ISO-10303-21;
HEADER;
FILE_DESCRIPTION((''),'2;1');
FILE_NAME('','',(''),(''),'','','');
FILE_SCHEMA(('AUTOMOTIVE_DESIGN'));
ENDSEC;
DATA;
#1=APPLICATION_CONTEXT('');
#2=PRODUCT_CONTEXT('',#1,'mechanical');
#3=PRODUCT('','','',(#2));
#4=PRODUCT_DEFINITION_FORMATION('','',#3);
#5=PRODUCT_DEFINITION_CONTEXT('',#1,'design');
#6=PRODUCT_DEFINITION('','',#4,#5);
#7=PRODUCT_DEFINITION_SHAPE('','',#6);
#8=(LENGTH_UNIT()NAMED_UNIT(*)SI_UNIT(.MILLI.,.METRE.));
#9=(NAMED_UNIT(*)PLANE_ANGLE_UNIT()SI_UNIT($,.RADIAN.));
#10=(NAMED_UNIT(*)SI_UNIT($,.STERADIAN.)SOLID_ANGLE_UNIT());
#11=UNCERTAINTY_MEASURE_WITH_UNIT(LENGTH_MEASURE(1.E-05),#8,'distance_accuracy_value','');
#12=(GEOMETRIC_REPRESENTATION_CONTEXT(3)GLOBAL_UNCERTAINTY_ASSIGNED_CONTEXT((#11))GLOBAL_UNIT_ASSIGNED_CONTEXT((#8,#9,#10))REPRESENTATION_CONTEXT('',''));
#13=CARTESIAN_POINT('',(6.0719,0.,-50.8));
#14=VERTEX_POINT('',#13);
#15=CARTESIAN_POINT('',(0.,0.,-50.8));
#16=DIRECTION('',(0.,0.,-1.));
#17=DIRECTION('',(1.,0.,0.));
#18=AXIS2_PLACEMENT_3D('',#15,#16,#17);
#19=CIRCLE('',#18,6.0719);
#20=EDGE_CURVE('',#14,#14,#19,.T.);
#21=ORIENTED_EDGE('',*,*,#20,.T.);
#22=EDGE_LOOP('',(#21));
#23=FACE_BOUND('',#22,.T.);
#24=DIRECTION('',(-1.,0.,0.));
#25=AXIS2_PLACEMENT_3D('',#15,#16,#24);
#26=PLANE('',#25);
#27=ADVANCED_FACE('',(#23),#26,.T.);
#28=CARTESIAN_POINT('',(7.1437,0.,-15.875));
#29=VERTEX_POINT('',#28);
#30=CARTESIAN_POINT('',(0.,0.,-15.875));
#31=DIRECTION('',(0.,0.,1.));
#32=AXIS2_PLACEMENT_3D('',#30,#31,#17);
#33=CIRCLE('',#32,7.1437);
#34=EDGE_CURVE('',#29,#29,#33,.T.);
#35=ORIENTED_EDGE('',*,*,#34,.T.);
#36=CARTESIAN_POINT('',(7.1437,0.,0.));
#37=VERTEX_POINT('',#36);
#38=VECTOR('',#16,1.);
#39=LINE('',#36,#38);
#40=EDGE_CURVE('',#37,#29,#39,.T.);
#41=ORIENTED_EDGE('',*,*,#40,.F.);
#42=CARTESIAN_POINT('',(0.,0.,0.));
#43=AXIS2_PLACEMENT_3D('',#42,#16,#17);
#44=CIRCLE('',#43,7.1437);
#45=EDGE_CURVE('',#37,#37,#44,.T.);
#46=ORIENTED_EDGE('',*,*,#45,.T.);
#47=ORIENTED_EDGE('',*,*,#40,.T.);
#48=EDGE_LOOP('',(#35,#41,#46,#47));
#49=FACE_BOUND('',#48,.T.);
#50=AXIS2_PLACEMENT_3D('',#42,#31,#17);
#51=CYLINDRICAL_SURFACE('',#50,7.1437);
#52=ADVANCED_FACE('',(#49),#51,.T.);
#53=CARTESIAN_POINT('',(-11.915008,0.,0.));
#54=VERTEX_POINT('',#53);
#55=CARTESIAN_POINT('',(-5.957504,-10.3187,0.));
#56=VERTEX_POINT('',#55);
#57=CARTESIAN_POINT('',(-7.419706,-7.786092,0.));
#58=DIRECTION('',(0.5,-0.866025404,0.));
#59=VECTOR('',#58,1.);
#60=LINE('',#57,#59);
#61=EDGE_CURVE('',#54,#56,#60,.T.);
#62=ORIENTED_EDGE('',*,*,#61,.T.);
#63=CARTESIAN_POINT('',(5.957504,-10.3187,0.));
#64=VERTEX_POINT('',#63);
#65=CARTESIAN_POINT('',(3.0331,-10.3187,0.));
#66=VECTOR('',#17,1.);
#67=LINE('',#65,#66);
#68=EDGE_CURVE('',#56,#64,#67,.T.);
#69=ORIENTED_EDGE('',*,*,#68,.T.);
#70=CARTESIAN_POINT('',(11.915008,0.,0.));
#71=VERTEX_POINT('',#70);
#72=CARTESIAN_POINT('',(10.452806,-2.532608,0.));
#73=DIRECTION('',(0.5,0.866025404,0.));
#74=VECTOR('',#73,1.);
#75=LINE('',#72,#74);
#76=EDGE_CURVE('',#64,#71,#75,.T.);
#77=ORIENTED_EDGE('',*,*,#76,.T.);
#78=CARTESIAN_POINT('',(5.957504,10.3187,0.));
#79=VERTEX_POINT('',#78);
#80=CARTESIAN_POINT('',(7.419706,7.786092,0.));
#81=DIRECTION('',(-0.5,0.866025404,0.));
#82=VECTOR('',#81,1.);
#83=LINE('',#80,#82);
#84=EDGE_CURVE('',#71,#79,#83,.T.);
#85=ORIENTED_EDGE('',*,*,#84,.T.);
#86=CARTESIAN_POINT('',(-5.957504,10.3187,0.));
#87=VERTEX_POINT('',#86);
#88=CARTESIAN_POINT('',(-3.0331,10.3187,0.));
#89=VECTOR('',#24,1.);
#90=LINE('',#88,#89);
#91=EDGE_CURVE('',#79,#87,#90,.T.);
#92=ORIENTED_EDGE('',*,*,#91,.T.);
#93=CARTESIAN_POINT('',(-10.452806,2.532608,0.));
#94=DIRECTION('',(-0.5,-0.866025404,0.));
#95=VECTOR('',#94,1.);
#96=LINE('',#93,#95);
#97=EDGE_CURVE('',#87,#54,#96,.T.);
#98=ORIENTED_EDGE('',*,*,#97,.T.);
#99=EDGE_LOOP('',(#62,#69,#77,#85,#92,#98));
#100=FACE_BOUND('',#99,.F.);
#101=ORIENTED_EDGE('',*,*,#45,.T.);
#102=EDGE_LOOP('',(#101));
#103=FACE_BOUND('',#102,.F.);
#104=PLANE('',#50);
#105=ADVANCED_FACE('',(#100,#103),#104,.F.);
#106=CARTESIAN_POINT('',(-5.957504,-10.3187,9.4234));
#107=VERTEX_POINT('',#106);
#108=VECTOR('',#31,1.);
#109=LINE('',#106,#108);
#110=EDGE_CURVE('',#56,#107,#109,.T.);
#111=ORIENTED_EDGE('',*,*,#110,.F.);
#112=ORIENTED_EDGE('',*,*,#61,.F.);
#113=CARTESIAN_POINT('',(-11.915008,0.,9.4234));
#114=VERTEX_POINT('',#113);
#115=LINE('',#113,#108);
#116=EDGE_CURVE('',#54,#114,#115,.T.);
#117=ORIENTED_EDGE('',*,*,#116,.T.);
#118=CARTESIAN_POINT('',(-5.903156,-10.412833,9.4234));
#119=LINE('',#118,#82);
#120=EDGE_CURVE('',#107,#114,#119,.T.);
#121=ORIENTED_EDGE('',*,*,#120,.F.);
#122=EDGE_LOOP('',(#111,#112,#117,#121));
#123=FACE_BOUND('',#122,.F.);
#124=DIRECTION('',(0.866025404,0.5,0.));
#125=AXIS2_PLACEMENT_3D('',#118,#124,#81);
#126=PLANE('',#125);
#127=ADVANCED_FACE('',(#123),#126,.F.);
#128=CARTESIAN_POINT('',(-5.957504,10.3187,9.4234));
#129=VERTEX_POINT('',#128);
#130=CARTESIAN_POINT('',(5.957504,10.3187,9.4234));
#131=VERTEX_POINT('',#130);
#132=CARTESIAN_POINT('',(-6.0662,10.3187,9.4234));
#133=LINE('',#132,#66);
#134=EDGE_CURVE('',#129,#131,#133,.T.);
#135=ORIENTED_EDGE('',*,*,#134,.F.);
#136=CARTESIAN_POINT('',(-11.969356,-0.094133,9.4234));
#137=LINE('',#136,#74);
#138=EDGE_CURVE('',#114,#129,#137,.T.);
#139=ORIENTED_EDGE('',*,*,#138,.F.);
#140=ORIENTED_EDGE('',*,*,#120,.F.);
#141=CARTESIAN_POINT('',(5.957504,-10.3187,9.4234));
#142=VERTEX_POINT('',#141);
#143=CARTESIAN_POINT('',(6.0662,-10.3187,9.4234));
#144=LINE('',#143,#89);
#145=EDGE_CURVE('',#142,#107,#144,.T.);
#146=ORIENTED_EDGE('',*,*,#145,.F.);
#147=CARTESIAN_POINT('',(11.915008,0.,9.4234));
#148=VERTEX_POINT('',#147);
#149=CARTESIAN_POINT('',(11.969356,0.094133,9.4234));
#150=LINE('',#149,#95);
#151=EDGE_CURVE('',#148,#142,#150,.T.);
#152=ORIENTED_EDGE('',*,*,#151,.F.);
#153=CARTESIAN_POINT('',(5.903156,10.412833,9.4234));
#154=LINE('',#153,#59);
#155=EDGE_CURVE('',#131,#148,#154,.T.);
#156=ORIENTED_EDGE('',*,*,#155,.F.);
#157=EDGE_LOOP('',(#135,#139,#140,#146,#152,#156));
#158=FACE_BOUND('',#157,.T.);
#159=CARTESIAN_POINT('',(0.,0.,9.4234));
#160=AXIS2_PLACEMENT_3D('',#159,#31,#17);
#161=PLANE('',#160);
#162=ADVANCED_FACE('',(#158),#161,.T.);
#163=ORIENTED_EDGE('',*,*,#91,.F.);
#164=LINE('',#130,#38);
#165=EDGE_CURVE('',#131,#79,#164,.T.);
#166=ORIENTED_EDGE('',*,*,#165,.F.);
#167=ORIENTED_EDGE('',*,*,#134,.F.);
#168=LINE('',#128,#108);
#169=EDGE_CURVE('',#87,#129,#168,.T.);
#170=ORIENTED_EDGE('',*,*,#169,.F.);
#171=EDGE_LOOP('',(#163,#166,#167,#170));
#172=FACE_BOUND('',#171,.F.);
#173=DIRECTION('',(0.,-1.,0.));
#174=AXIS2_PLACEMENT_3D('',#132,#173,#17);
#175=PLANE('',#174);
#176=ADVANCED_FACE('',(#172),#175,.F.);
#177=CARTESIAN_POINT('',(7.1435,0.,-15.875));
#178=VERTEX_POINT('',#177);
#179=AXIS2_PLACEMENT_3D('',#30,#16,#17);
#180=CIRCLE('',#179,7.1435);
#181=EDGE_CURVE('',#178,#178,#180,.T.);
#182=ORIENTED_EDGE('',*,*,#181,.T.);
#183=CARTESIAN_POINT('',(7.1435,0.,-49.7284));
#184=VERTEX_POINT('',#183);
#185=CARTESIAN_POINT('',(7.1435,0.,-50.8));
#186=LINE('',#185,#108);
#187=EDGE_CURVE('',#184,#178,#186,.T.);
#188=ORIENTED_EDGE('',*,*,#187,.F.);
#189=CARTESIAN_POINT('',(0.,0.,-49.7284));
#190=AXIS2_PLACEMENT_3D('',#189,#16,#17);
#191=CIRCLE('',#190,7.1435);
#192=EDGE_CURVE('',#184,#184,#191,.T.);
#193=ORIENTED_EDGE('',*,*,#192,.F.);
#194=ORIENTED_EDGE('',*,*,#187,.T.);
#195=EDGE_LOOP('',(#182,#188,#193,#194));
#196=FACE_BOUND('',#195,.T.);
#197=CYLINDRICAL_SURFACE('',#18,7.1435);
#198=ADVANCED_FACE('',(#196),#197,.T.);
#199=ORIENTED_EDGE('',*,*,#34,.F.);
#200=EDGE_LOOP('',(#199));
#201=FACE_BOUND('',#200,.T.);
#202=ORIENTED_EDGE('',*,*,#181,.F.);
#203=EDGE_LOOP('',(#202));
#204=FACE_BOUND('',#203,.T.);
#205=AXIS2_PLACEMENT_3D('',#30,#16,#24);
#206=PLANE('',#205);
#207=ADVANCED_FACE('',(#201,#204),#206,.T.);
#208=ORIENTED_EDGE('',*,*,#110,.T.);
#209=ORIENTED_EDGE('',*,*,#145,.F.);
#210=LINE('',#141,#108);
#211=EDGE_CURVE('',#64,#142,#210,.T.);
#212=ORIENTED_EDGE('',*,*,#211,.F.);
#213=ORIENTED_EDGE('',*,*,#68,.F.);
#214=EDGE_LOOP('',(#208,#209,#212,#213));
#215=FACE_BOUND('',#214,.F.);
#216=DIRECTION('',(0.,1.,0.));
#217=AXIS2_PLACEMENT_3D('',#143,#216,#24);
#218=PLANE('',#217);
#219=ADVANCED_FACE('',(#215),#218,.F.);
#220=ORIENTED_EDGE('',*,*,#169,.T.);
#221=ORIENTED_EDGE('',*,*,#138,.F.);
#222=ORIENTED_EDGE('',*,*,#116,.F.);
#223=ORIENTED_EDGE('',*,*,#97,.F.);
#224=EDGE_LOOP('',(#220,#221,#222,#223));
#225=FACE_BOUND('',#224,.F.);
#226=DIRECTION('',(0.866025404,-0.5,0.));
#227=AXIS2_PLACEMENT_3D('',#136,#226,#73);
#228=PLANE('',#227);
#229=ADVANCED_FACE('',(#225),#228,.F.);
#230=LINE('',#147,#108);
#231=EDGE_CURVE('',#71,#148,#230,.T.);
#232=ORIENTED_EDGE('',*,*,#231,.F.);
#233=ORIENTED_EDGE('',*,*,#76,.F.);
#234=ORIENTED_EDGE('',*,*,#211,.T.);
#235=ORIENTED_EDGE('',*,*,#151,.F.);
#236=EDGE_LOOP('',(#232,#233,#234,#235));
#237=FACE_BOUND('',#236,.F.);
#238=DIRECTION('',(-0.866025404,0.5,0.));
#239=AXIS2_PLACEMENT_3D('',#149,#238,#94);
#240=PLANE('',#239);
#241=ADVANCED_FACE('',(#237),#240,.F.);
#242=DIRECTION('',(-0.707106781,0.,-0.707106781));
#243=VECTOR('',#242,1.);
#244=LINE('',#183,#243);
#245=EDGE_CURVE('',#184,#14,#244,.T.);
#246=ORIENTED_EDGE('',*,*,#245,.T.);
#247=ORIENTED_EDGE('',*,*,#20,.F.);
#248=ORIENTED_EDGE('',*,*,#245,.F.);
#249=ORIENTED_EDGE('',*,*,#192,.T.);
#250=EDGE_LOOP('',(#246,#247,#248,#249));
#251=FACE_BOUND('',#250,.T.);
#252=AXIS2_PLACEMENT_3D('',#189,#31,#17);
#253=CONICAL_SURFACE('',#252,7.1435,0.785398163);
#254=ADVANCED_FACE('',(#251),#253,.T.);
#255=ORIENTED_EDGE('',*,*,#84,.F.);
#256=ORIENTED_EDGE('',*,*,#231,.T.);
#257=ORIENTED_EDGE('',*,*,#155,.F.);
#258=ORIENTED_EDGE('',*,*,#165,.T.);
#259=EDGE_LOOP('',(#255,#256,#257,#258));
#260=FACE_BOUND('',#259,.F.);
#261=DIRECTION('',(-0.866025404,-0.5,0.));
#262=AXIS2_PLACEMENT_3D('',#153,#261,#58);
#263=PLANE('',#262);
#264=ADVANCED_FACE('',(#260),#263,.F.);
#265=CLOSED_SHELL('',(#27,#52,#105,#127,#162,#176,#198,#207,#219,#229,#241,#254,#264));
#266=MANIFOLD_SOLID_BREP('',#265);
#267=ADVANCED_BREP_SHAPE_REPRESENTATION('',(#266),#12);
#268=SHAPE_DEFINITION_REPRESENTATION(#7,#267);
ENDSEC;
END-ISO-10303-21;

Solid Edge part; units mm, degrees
sketch "Sketch1" plane through (0, 0, 0) normal (0, 0, 1) x (1, 0, 0)
  circle A0 centre (0, 0) radius 11.9697
  dimension "D1" = 23.9395
extrude "Protrusion1" add sketch "Sketch1" along normal blind 9.4234
sketch "Sketch2" plane through (0, 0, 0) normal (0, 0, -1) x (1, 0, 0)
  circle A0 centre (0, 0) radius 7.1437
extrude "Protrusion2" add sketch "Sketch2" along normal blind 50.8
sketch "Sketch3" plane through (0, 0, -50.8) normal (0, 0, -1) x (1, 0, 0)
  circle A0 centre (0, 0) radius 7.1435
extrude "Cutout1" cut sketch "Sketch3" against normal blind 34.925 flip side to cut
chamfer "Chamfer_1" distance 1.0716 angle 45 1 edges at (-7.1435, 0, -50.8)
sketch "Sketch4" plane through (0, 0, 9.4234) normal (0, 0, 1) x (1, 0, 0)
  line L0 (-6.0662, 10.3187) -> (6.0662, 10.3187)
  dimension "D1" = 20.6375
extrude "Cutout2" cut sketch "Sketch4" against normal up to next material side at (0, 10.3687, 9.4234)
pattern_circular "Pattern1" count 6 over 360 about axis through (0, 0, 9.4234) along (0, 0, 1) of "Cutout2"
properties part number "24101157"
